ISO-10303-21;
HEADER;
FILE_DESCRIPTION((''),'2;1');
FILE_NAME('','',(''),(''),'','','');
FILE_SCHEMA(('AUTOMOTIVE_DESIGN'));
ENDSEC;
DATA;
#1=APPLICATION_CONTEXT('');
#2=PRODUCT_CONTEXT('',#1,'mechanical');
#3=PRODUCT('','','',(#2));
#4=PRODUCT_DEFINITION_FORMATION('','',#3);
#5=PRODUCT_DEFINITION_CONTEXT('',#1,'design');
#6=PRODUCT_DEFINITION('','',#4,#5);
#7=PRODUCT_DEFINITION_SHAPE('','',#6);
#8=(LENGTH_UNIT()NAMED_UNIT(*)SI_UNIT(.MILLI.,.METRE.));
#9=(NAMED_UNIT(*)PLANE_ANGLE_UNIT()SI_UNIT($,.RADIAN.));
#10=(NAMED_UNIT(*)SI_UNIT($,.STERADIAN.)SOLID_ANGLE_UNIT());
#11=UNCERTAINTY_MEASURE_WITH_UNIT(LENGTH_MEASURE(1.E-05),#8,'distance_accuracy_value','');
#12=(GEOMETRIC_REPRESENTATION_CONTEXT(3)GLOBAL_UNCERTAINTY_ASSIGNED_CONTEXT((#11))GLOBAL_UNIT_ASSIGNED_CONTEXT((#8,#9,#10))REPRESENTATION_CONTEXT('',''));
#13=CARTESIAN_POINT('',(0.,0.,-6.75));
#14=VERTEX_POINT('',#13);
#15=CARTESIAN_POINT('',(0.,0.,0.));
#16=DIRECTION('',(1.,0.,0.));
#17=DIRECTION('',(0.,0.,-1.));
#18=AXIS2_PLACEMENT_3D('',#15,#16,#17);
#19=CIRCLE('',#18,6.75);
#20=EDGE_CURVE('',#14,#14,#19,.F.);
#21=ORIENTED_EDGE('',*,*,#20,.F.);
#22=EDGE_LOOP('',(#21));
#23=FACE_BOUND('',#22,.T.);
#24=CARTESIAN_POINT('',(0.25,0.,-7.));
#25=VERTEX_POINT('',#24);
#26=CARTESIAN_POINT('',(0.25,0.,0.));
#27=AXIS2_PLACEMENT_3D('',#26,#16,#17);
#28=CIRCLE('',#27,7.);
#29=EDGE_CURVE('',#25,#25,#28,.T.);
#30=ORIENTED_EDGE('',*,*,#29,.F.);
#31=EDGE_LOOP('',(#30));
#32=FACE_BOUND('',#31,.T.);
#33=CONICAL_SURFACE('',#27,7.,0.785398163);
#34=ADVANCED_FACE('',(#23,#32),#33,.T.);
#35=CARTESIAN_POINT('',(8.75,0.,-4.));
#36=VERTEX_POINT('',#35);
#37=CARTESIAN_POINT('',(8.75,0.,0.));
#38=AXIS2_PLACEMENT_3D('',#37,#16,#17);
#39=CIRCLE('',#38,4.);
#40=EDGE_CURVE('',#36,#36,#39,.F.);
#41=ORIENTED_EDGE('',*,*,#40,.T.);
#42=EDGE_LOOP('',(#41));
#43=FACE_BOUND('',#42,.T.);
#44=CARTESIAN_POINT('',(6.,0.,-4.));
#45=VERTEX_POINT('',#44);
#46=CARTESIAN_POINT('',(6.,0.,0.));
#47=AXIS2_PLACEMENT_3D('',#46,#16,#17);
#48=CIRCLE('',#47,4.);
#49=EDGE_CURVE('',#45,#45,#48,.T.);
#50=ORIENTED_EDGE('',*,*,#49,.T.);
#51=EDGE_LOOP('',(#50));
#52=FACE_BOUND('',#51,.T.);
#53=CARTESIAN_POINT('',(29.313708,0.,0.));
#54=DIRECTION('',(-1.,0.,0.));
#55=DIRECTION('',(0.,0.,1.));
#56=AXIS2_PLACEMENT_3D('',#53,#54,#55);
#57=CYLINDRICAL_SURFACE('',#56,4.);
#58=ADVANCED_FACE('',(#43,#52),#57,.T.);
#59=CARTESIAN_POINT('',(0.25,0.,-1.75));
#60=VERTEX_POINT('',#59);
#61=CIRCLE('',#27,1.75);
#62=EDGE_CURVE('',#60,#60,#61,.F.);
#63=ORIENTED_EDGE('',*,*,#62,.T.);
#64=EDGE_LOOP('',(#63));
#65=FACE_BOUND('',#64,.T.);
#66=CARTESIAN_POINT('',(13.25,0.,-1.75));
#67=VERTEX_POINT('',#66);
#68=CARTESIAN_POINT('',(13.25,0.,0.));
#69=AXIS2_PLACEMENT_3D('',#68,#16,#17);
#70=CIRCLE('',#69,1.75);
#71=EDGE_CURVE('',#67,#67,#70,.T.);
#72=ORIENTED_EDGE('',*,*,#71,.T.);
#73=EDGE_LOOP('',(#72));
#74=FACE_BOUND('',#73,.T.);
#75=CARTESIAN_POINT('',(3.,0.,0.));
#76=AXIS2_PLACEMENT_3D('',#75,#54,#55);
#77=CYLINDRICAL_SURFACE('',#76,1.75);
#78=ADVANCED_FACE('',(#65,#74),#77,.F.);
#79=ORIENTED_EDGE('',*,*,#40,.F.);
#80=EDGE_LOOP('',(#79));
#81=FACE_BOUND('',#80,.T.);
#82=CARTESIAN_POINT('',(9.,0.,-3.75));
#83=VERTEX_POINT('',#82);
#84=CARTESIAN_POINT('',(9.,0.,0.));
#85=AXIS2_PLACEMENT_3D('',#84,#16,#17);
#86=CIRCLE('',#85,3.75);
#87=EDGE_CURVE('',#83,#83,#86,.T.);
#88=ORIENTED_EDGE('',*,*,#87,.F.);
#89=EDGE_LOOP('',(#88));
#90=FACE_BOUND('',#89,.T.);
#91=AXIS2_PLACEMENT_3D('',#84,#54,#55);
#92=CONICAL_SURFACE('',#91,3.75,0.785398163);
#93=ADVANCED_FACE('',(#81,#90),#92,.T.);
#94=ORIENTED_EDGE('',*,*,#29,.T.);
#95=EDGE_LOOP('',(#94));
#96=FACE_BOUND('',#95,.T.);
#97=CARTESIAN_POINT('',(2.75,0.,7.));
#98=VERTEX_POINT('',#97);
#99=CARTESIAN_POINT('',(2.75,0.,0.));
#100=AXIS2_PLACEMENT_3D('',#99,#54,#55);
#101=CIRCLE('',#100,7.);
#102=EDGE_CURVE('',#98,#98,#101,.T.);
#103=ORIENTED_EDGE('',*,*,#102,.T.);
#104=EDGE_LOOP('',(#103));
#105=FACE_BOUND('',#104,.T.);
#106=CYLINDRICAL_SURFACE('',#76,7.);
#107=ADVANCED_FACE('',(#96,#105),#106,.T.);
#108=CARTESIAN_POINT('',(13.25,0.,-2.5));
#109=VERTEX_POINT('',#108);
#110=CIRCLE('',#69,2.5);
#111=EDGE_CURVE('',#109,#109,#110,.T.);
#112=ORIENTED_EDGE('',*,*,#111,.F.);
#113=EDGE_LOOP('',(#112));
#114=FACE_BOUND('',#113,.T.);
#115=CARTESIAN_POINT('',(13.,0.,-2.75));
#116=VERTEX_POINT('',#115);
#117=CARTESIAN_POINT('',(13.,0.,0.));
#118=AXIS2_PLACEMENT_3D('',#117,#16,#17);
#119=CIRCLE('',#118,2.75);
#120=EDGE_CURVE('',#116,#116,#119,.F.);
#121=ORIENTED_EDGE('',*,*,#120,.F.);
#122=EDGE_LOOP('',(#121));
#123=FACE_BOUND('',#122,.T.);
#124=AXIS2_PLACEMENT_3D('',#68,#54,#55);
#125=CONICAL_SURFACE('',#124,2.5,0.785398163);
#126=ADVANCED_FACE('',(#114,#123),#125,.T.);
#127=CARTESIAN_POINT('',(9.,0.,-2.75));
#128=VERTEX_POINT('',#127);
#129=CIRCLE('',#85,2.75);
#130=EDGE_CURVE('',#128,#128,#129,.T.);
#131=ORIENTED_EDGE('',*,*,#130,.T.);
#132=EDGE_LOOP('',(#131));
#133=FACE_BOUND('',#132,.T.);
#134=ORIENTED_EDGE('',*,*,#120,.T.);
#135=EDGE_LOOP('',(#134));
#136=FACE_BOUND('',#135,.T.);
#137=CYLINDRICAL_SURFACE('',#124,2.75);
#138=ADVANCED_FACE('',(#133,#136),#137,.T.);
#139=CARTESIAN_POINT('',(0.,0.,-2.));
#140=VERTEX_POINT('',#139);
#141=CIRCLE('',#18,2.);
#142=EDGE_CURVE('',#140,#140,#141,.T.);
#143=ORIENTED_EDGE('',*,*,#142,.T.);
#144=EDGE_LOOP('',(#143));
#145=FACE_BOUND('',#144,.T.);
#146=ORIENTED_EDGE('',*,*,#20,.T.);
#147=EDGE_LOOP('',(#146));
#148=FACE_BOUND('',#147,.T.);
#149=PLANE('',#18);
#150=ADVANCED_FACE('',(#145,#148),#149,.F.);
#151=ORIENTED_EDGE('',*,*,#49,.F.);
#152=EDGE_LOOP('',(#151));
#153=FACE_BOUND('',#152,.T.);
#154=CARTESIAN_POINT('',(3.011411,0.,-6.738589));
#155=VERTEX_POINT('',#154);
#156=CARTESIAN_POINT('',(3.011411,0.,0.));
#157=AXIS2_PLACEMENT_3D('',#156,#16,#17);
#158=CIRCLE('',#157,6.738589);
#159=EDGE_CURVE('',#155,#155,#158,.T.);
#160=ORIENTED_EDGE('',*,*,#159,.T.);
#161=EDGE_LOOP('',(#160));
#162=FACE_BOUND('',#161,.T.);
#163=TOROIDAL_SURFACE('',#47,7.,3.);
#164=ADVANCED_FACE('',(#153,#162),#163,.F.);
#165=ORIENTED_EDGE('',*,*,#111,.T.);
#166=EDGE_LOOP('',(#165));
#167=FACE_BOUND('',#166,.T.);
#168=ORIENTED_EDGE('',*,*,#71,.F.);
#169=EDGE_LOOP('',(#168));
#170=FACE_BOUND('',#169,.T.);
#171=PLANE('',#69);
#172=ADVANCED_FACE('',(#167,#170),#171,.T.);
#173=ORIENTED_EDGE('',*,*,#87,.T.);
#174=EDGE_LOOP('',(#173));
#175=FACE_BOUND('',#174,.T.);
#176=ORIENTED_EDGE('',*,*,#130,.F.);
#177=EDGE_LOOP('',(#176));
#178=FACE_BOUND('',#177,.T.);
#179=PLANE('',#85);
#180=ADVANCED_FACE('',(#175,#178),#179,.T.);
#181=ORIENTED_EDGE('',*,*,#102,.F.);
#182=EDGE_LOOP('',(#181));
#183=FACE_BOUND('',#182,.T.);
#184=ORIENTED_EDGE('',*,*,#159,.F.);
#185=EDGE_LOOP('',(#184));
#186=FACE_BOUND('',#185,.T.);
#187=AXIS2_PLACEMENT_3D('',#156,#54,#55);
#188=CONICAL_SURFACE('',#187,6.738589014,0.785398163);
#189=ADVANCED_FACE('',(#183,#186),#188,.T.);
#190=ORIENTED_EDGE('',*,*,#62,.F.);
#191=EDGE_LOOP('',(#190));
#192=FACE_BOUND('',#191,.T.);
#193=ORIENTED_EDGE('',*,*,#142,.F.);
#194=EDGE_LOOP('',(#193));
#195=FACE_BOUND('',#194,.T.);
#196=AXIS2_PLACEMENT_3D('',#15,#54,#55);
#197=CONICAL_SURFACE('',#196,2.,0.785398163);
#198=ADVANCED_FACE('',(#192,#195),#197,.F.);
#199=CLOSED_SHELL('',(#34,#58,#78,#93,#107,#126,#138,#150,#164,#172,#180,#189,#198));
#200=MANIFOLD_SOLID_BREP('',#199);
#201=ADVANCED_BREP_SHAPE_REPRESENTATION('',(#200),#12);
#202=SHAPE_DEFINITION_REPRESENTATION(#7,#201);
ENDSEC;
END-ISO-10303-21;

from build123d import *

# Parameters (mm, degrees)
SKETCH1_R           = 7
SKETCH1_R_2         = 1.75
BOSS_EXTRUDE1_DEPTH = 3
SKETCH2_R           = 4
SKETCH2_R_2         = 1.75
BOSS_EXTRUDE2_DEPTH = 6
FILLET1_R           = 3
SKETCH4_R           = 2.75
SKETCH4_R_2         = 1.75
BOSS_EXTRUDE3_DEPTH = 4.25


# Some blends are built 0.0001 mm under size
with BuildPart() as part:
    # Sketch1 → Boss-Extrude1 (new body)
    with BuildSketch(Plane(origin=(0, 0, 0), x_dir=(0, 0, -1), z_dir=(1, 0, 0))):
        Circle(SKETCH1_R)
        Circle(SKETCH1_R_2, mode=Mode.SUBTRACT)
    extrude(amount=BOSS_EXTRUDE1_DEPTH)

    # Sketch2 → Boss-Extrude2 (add)
    with BuildSketch(Plane(origin=(3, 0, 0), x_dir=(0, 0, -1), z_dir=(1, 0, 0))):
        Circle(SKETCH2_R)
        Circle(SKETCH2_R_2, mode=Mode.SUBTRACT)
    extrude(amount=BOSS_EXTRUDE2_DEPTH)

    # Fillet1
    fillet1_edges = [part.edges().sort_by_distance(p)[0] for p in [
        (3, 0, 4),
    ]]
    fillet(fillet1_edges, radius=FILLET1_R - 0.0001)  # a hair under: the kernel refuses the full size

    # Sketch4 → Boss-Extrude3 (add)
    with BuildSketch(Plane(origin=(9, 0, 0), x_dir=(0, 0, -1), z_dir=(1, 0, 0))):
        Circle(SKETCH4_R)
        Circle(SKETCH4_R_2, mode=Mode.SUBTRACT)
    extrude(amount=BOSS_EXTRUDE3_DEPTH)

    # Chamfer1
    # the kernel refuses this chamfer: 0.25 mm, written as the material it takes off along each edge
    with BuildSketch(Plane(origin=(9, 0, 0), x_dir=(0, 0, -1), z_dir=(0, -1, 0))) as chamfer1_piece_1:
        with BuildLine():
            Line((3.696966991, 0.053033009), (4.053033009, -0.303033009))
            Line((4.053033009, -0.303033009), (4.090533009, -0.303033009))
            ThreePointArc((4.090533009, -0.303033009), (4.0375, -0.151516504), (4.0375, 0))
            Line((4.0375, 0), (4, 0.0375))
            ThreePointArc((4, 0.0375), (3.848483496, 0.0375), (3.696966991, 0.090533009))
            Line((3.696966991, 0.090533009), (3.696966991, 0.053033009))
        make_face()
    revolve(axis=Axis((9, 0, 0), (1, 0, 0)), mode=Mode.SUBTRACT)
    with BuildSketch(Plane(origin=(0, 0, 0), x_dir=(0, 0, -1), z_dir=(0, -1, 0))) as chamfer1_piece_2:
        with BuildLine():
            Line((7.053033009, 0.303033009), (6.696966991, -0.053033009))
            Line((6.696966991, -0.053033009), (6.696966991, -0.090533009))
            ThreePointArc((6.696966991, -0.090533009), (6.848483496, -0.0375), (7, -0.0375))
            Line((7, -0.0375), (7.0375, 0))
            ThreePointArc((7.0375, 0), (7.0375, 0.151516504), (7.090533009, 0.303033009))
            Line((7.090533009, 0.303033009), (7.053033009, 0.303033009))
        make_face()
    revolve(axis=Axis((0, 0, 0), (1, 0, 0)), mode=Mode.SUBTRACT)
    with BuildSketch(Plane(origin=(13.25, 0, 0), x_dir=(0, 0, -1), z_dir=(0, -1, 0))) as chamfer1_piece_3:
        with BuildLine():
            Line((2.446966991, 0.053033009), (2.803033009, -0.303033009))
            Line((2.803033009, -0.303033009), (2.840533009, -0.303033009))
            ThreePointArc((2.840533009, -0.303033009), (2.7875, -0.151516504), (2.7875, 0))
            Line((2.7875, 0), (2.75, 0.0375))
            ThreePointArc((2.75, 0.0375), (2.598483496, 0.0375), (2.446966991, 0.090533009))
            Line((2.446966991, 0.090533009), (2.446966991, 0.053033009))
        make_face()
    revolve(axis=Axis((13.25, 0, 0), (1, 0, 0)), mode=Mode.SUBTRACT)
    with BuildSketch(Plane(origin=(3, 0, 0), x_dir=(0, 0, -1), z_dir=(0, -1, 0))) as chamfer1_piece_4:
        with BuildLine():
            Line((6.696966991, 0.053033009), (7.053033009, -0.303033009))
            Line((7.053033009, -0.303033009), (7.090533009, -0.303033009))
            ThreePointArc((7.090533009, -0.303033009), (7.0375, -0.151516504), (7.0375, 0))
            Line((7.0375, 0), (7, 0.0375))
            ThreePointArc((7, 0.0375), (6.848483496, 0.0375), (6.696966991, 0.090533009))
            Line((6.696966991, 0.090533009), (6.696966991, 0.053033009))
        make_face()
    revolve(axis=Axis((3, 0, 0), (1, 0, 0)), mode=Mode.SUBTRACT)
    with BuildSketch(Plane(origin=(0, 0, 0), x_dir=(0, 0, -1), z_dir=(0, -1, 0))) as chamfer1_piece_5:
        with BuildLine():
            Line((2.053033009, -0.053033009), (1.696966991, 0.303033009))
            Line((1.696966991, 0.303033009), (1.659466991, 0.303033009))
            ThreePointArc((1.659466991, 0.303033009), (1.7125, 0.151516504), (1.7125, 0))
            Line((1.7125, 0), (1.75, -0.0375))
            ThreePointArc((1.75, -0.0375), (1.901516504, -0.0375), (2.053033009, -0.090533009))
            Line((2.053033009, -0.090533009), (2.053033009, -0.053033009))
        make_face()
    revolve(axis=Axis((0, 0, 0), (1, 0, 0)), mode=Mode.SUBTRACT)


solid = part.part
